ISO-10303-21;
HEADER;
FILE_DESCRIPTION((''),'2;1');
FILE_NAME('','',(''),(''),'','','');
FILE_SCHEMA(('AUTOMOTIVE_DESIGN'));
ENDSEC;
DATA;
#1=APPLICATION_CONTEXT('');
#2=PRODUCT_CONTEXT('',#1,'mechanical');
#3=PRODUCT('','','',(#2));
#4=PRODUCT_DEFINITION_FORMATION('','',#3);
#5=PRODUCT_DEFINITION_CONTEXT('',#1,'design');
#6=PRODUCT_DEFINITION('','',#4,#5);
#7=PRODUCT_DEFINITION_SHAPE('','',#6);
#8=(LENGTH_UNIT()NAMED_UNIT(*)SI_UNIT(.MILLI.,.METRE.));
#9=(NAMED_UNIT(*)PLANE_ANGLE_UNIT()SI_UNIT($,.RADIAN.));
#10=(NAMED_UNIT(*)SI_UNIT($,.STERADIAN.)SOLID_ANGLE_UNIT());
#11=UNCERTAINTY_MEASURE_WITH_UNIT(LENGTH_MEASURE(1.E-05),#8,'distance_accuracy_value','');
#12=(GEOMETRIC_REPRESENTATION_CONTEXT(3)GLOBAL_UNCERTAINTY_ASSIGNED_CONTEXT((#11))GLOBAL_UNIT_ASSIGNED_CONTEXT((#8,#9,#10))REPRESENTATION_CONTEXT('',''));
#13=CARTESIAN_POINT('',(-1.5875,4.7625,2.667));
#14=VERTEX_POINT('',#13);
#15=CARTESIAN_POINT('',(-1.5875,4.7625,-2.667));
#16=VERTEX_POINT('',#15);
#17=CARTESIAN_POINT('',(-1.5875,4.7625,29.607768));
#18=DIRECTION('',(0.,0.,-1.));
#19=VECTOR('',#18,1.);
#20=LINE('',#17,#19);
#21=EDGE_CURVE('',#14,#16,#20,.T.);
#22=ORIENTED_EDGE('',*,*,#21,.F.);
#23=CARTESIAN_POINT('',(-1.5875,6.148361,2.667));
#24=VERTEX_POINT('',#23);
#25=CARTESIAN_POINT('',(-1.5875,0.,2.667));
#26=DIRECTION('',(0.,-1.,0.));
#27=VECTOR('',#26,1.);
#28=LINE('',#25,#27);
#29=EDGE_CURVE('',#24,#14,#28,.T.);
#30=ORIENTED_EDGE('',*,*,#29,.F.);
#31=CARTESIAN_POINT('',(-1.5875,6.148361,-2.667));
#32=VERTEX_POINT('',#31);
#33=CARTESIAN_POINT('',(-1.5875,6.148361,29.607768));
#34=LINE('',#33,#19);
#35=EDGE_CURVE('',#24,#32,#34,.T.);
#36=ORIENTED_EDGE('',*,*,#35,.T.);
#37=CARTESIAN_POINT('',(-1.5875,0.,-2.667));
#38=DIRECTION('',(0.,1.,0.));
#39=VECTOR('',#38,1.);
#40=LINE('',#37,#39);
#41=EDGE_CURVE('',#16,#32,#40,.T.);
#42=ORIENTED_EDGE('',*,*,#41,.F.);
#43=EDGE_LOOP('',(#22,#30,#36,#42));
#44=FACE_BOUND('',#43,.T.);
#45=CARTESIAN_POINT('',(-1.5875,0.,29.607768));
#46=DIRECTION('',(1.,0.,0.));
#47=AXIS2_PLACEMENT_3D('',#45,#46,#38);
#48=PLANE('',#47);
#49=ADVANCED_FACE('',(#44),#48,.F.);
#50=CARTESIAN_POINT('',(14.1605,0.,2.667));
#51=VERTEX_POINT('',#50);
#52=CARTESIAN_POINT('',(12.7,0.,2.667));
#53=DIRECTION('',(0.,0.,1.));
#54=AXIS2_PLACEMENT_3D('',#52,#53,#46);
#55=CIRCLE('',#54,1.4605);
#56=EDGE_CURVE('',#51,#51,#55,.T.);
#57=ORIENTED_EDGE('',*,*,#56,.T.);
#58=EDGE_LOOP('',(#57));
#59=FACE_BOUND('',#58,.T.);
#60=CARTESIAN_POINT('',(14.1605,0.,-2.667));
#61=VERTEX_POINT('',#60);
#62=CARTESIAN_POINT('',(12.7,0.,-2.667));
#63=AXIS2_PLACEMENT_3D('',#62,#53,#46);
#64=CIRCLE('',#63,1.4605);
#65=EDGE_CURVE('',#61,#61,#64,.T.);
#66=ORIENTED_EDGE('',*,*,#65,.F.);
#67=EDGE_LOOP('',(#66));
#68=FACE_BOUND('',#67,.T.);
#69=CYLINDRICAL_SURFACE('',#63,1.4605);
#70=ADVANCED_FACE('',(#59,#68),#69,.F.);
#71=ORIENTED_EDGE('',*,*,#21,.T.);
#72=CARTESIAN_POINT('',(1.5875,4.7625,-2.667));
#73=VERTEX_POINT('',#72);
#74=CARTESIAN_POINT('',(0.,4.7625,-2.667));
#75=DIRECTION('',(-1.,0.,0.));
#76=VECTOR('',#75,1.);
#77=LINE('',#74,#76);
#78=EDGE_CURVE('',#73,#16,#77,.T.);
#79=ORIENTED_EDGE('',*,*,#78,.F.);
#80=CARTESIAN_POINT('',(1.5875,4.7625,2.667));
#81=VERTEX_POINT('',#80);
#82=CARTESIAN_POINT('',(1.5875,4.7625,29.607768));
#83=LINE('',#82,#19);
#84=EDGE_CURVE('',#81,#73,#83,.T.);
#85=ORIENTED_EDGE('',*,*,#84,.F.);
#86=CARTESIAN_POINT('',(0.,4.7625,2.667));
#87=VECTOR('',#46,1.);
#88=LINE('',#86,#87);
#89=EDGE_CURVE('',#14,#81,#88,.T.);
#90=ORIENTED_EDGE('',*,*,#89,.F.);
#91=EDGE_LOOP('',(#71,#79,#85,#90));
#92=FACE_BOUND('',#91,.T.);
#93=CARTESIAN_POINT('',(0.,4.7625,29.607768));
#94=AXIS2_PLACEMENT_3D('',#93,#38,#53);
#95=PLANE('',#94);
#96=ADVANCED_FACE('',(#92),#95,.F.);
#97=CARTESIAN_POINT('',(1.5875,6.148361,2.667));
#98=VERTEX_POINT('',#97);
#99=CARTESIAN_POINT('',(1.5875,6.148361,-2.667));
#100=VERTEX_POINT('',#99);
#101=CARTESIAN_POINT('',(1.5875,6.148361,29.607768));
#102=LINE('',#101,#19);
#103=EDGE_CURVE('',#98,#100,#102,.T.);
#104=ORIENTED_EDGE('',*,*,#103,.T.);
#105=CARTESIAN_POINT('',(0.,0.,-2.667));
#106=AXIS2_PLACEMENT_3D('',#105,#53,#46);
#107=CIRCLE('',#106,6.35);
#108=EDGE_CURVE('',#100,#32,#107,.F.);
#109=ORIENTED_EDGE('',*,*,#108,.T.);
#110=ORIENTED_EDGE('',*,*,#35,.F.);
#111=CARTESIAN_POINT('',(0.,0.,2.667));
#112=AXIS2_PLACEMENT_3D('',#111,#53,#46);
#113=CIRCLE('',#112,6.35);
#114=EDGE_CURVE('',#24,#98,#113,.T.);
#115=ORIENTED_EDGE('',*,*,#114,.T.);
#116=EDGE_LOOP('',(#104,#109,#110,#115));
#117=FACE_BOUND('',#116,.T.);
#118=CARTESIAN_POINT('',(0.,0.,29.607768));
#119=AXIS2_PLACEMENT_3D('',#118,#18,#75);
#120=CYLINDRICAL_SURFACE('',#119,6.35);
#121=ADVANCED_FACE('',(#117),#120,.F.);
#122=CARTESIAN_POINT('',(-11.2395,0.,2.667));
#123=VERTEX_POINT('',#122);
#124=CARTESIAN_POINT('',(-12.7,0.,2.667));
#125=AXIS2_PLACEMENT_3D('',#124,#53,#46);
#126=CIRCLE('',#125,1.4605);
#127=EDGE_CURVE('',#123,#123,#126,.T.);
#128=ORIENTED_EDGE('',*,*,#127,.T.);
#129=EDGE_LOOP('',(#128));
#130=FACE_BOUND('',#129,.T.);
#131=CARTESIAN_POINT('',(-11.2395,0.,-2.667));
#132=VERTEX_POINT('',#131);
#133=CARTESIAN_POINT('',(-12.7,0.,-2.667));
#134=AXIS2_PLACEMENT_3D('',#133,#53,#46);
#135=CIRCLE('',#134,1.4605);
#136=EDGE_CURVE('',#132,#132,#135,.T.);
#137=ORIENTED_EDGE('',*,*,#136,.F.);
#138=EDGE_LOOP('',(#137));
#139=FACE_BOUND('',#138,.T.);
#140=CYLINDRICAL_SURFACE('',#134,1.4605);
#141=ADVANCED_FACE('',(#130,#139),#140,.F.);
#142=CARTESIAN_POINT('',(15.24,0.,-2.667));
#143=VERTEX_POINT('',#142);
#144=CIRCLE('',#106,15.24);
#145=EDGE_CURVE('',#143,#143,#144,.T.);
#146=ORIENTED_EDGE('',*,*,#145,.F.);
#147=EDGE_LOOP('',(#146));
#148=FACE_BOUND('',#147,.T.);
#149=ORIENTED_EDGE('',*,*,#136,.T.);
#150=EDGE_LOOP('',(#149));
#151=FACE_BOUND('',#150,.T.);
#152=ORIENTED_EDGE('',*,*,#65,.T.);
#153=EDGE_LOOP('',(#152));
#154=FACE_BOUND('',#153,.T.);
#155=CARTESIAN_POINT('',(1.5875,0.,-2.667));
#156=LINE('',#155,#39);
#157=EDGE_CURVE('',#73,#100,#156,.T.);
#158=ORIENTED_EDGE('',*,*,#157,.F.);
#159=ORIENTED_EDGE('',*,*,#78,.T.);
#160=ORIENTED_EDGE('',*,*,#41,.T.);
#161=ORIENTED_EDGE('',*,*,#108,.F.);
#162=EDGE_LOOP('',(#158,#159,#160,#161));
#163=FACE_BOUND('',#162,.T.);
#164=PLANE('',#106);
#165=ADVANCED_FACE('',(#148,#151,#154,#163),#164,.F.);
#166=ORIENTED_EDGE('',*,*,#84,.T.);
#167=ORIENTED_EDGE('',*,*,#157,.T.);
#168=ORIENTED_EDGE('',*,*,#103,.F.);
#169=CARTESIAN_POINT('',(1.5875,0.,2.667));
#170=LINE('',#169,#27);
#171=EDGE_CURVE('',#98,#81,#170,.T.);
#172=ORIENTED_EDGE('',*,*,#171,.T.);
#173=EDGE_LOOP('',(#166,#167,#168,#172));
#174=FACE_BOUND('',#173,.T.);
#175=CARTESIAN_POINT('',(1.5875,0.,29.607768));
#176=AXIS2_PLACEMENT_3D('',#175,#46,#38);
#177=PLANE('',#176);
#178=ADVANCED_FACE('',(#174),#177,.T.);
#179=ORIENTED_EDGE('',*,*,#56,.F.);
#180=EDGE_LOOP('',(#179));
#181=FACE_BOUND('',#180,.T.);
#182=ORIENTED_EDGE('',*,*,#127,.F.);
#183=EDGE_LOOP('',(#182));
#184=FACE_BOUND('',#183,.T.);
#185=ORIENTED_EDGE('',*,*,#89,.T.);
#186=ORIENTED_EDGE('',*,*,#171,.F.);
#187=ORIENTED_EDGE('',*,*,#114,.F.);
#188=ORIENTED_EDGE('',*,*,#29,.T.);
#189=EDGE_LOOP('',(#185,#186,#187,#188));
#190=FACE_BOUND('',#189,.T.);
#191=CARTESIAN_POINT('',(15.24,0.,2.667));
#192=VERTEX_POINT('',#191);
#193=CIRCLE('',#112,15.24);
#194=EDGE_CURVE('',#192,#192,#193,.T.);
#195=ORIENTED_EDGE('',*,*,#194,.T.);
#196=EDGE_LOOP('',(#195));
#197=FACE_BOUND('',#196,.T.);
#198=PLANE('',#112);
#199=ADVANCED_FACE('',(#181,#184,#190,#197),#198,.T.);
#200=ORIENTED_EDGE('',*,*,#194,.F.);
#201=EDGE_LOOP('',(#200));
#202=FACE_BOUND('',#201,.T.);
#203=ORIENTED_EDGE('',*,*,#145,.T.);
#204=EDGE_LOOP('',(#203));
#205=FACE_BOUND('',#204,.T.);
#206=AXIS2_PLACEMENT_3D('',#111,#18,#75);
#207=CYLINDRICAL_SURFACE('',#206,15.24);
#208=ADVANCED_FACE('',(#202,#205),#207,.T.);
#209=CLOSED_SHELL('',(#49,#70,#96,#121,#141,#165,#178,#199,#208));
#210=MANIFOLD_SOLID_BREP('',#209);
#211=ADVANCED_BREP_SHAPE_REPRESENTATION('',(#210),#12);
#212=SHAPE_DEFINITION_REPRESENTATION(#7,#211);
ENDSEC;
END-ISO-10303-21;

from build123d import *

# Parameters (mm, degrees)
SKETCH1_R                       = 15.24
SKETCH1_R_2                     = 9.144
BOSS_EXTRUDE1_DEPTH             = 2.667
SKETCH2_R                       = 1.4605
CUT_EXTRUDE1_DEPTH              = 23.202854681
BOSS_EXTRUDE2_REACH             = 23.717
SKETCH3_R                       = 9.525
BOSS_EXTRUDE2_DIRECTION_2_REACH = 23.717


with BuildPart() as part:
    # Sketch1 → Boss-Extrude1 (new, symmetric)
    with BuildSketch(Plane.XY):
        Circle(SKETCH1_R)
        Circle(SKETCH1_R_2, mode=Mode.SUBTRACT)
    extrude(amount=BOSS_EXTRUDE1_DEPTH, both=True)

    # Sketch2 → Cut-Extrude1 (cut, through all)
    with BuildSketch(Plane.XY.offset(2.667)):
        with Locations((12.7, 0)):
            Circle(SKETCH2_R)
        with Locations((-12.7, 0)):
            Circle(SKETCH2_R)
    extrude(amount=-CUT_EXTRUDE1_DEPTH, mode=Mode.SUBTRACT)

    # Boss-Extrude2: up to this face of the body (flat: up to its plane)
    boss_extrude2_end = Plane(part.part.faces().sort_by_distance((-14.808947706, 0, 2.667))[0])
    # Sketch3 → Boss-Extrude2 (add, up to the picked face)
    with BuildSketch(Plane.XY, mode=Mode.PRIVATE) as boss_extrude2_sk1:
        Circle(SKETCH3_R)
        with BuildLine():
            Line((-1.5875, 6.148361062), (-1.5875, 4.7625))
            Line((-1.5875, 4.7625), (1.5875, 4.7625))
            Line((1.5875, 4.7625), (1.5875, 6.148361062))
            ThreePointArc((1.5875, 6.148361062), (0, -6.35), (-1.5875, 6.148361062))
        make_face(mode=Mode.SUBTRACT)
    boss_extrude2_tool1 = split(extrude(boss_extrude2_sk1.sketch, amount=BOSS_EXTRUDE2_REACH, mode=Mode.PRIVATE), bisect_by=boss_extrude2_end, keep=Keep.BOTH, mode=Mode.PRIVATE)
    add(boss_extrude2_tool1.solids().sort_by(Axis((-9.255592, 0, 0), (0, 0, 1)))[0])

    # Boss-Extrude2 direction 2: up to this face of the body (flat: up to its plane)
    boss_extrude2_direction_2_end = Plane(part.part.faces().sort_by_distance((-14.808947706, 0, -2.667))[0])
    # Sketch3 → Boss-Extrude2 direction 2 (add, up to the picked face)
    with BuildSketch(Plane.XY, mode=Mode.PRIVATE) as boss_extrude2_direction_2_sk1:
        Circle(SKETCH3_R)
        with BuildLine():
            Line((-1.5875, 6.148361062), (-1.5875, 4.7625))
            Line((-1.5875, 4.7625), (1.5875, 4.7625))
            Line((1.5875, 4.7625), (1.5875, 6.148361062))
            ThreePointArc((1.5875, 6.148361062), (0, -6.35), (-1.5875, 6.148361062))
        make_face(mode=Mode.SUBTRACT)
    boss_extrude2_direction_2_tool1 = split(extrude(boss_extrude2_direction_2_sk1.sketch, amount=-BOSS_EXTRUDE2_DIRECTION_2_REACH, mode=Mode.PRIVATE), bisect_by=boss_extrude2_direction_2_end, keep=Keep.BOTH, mode=Mode.PRIVATE)
    add(boss_extrude2_direction_2_tool1.solids().sort_by(Axis((-9.255592, 0, 0), (0, 0, -1)))[0])


solid = part.part
